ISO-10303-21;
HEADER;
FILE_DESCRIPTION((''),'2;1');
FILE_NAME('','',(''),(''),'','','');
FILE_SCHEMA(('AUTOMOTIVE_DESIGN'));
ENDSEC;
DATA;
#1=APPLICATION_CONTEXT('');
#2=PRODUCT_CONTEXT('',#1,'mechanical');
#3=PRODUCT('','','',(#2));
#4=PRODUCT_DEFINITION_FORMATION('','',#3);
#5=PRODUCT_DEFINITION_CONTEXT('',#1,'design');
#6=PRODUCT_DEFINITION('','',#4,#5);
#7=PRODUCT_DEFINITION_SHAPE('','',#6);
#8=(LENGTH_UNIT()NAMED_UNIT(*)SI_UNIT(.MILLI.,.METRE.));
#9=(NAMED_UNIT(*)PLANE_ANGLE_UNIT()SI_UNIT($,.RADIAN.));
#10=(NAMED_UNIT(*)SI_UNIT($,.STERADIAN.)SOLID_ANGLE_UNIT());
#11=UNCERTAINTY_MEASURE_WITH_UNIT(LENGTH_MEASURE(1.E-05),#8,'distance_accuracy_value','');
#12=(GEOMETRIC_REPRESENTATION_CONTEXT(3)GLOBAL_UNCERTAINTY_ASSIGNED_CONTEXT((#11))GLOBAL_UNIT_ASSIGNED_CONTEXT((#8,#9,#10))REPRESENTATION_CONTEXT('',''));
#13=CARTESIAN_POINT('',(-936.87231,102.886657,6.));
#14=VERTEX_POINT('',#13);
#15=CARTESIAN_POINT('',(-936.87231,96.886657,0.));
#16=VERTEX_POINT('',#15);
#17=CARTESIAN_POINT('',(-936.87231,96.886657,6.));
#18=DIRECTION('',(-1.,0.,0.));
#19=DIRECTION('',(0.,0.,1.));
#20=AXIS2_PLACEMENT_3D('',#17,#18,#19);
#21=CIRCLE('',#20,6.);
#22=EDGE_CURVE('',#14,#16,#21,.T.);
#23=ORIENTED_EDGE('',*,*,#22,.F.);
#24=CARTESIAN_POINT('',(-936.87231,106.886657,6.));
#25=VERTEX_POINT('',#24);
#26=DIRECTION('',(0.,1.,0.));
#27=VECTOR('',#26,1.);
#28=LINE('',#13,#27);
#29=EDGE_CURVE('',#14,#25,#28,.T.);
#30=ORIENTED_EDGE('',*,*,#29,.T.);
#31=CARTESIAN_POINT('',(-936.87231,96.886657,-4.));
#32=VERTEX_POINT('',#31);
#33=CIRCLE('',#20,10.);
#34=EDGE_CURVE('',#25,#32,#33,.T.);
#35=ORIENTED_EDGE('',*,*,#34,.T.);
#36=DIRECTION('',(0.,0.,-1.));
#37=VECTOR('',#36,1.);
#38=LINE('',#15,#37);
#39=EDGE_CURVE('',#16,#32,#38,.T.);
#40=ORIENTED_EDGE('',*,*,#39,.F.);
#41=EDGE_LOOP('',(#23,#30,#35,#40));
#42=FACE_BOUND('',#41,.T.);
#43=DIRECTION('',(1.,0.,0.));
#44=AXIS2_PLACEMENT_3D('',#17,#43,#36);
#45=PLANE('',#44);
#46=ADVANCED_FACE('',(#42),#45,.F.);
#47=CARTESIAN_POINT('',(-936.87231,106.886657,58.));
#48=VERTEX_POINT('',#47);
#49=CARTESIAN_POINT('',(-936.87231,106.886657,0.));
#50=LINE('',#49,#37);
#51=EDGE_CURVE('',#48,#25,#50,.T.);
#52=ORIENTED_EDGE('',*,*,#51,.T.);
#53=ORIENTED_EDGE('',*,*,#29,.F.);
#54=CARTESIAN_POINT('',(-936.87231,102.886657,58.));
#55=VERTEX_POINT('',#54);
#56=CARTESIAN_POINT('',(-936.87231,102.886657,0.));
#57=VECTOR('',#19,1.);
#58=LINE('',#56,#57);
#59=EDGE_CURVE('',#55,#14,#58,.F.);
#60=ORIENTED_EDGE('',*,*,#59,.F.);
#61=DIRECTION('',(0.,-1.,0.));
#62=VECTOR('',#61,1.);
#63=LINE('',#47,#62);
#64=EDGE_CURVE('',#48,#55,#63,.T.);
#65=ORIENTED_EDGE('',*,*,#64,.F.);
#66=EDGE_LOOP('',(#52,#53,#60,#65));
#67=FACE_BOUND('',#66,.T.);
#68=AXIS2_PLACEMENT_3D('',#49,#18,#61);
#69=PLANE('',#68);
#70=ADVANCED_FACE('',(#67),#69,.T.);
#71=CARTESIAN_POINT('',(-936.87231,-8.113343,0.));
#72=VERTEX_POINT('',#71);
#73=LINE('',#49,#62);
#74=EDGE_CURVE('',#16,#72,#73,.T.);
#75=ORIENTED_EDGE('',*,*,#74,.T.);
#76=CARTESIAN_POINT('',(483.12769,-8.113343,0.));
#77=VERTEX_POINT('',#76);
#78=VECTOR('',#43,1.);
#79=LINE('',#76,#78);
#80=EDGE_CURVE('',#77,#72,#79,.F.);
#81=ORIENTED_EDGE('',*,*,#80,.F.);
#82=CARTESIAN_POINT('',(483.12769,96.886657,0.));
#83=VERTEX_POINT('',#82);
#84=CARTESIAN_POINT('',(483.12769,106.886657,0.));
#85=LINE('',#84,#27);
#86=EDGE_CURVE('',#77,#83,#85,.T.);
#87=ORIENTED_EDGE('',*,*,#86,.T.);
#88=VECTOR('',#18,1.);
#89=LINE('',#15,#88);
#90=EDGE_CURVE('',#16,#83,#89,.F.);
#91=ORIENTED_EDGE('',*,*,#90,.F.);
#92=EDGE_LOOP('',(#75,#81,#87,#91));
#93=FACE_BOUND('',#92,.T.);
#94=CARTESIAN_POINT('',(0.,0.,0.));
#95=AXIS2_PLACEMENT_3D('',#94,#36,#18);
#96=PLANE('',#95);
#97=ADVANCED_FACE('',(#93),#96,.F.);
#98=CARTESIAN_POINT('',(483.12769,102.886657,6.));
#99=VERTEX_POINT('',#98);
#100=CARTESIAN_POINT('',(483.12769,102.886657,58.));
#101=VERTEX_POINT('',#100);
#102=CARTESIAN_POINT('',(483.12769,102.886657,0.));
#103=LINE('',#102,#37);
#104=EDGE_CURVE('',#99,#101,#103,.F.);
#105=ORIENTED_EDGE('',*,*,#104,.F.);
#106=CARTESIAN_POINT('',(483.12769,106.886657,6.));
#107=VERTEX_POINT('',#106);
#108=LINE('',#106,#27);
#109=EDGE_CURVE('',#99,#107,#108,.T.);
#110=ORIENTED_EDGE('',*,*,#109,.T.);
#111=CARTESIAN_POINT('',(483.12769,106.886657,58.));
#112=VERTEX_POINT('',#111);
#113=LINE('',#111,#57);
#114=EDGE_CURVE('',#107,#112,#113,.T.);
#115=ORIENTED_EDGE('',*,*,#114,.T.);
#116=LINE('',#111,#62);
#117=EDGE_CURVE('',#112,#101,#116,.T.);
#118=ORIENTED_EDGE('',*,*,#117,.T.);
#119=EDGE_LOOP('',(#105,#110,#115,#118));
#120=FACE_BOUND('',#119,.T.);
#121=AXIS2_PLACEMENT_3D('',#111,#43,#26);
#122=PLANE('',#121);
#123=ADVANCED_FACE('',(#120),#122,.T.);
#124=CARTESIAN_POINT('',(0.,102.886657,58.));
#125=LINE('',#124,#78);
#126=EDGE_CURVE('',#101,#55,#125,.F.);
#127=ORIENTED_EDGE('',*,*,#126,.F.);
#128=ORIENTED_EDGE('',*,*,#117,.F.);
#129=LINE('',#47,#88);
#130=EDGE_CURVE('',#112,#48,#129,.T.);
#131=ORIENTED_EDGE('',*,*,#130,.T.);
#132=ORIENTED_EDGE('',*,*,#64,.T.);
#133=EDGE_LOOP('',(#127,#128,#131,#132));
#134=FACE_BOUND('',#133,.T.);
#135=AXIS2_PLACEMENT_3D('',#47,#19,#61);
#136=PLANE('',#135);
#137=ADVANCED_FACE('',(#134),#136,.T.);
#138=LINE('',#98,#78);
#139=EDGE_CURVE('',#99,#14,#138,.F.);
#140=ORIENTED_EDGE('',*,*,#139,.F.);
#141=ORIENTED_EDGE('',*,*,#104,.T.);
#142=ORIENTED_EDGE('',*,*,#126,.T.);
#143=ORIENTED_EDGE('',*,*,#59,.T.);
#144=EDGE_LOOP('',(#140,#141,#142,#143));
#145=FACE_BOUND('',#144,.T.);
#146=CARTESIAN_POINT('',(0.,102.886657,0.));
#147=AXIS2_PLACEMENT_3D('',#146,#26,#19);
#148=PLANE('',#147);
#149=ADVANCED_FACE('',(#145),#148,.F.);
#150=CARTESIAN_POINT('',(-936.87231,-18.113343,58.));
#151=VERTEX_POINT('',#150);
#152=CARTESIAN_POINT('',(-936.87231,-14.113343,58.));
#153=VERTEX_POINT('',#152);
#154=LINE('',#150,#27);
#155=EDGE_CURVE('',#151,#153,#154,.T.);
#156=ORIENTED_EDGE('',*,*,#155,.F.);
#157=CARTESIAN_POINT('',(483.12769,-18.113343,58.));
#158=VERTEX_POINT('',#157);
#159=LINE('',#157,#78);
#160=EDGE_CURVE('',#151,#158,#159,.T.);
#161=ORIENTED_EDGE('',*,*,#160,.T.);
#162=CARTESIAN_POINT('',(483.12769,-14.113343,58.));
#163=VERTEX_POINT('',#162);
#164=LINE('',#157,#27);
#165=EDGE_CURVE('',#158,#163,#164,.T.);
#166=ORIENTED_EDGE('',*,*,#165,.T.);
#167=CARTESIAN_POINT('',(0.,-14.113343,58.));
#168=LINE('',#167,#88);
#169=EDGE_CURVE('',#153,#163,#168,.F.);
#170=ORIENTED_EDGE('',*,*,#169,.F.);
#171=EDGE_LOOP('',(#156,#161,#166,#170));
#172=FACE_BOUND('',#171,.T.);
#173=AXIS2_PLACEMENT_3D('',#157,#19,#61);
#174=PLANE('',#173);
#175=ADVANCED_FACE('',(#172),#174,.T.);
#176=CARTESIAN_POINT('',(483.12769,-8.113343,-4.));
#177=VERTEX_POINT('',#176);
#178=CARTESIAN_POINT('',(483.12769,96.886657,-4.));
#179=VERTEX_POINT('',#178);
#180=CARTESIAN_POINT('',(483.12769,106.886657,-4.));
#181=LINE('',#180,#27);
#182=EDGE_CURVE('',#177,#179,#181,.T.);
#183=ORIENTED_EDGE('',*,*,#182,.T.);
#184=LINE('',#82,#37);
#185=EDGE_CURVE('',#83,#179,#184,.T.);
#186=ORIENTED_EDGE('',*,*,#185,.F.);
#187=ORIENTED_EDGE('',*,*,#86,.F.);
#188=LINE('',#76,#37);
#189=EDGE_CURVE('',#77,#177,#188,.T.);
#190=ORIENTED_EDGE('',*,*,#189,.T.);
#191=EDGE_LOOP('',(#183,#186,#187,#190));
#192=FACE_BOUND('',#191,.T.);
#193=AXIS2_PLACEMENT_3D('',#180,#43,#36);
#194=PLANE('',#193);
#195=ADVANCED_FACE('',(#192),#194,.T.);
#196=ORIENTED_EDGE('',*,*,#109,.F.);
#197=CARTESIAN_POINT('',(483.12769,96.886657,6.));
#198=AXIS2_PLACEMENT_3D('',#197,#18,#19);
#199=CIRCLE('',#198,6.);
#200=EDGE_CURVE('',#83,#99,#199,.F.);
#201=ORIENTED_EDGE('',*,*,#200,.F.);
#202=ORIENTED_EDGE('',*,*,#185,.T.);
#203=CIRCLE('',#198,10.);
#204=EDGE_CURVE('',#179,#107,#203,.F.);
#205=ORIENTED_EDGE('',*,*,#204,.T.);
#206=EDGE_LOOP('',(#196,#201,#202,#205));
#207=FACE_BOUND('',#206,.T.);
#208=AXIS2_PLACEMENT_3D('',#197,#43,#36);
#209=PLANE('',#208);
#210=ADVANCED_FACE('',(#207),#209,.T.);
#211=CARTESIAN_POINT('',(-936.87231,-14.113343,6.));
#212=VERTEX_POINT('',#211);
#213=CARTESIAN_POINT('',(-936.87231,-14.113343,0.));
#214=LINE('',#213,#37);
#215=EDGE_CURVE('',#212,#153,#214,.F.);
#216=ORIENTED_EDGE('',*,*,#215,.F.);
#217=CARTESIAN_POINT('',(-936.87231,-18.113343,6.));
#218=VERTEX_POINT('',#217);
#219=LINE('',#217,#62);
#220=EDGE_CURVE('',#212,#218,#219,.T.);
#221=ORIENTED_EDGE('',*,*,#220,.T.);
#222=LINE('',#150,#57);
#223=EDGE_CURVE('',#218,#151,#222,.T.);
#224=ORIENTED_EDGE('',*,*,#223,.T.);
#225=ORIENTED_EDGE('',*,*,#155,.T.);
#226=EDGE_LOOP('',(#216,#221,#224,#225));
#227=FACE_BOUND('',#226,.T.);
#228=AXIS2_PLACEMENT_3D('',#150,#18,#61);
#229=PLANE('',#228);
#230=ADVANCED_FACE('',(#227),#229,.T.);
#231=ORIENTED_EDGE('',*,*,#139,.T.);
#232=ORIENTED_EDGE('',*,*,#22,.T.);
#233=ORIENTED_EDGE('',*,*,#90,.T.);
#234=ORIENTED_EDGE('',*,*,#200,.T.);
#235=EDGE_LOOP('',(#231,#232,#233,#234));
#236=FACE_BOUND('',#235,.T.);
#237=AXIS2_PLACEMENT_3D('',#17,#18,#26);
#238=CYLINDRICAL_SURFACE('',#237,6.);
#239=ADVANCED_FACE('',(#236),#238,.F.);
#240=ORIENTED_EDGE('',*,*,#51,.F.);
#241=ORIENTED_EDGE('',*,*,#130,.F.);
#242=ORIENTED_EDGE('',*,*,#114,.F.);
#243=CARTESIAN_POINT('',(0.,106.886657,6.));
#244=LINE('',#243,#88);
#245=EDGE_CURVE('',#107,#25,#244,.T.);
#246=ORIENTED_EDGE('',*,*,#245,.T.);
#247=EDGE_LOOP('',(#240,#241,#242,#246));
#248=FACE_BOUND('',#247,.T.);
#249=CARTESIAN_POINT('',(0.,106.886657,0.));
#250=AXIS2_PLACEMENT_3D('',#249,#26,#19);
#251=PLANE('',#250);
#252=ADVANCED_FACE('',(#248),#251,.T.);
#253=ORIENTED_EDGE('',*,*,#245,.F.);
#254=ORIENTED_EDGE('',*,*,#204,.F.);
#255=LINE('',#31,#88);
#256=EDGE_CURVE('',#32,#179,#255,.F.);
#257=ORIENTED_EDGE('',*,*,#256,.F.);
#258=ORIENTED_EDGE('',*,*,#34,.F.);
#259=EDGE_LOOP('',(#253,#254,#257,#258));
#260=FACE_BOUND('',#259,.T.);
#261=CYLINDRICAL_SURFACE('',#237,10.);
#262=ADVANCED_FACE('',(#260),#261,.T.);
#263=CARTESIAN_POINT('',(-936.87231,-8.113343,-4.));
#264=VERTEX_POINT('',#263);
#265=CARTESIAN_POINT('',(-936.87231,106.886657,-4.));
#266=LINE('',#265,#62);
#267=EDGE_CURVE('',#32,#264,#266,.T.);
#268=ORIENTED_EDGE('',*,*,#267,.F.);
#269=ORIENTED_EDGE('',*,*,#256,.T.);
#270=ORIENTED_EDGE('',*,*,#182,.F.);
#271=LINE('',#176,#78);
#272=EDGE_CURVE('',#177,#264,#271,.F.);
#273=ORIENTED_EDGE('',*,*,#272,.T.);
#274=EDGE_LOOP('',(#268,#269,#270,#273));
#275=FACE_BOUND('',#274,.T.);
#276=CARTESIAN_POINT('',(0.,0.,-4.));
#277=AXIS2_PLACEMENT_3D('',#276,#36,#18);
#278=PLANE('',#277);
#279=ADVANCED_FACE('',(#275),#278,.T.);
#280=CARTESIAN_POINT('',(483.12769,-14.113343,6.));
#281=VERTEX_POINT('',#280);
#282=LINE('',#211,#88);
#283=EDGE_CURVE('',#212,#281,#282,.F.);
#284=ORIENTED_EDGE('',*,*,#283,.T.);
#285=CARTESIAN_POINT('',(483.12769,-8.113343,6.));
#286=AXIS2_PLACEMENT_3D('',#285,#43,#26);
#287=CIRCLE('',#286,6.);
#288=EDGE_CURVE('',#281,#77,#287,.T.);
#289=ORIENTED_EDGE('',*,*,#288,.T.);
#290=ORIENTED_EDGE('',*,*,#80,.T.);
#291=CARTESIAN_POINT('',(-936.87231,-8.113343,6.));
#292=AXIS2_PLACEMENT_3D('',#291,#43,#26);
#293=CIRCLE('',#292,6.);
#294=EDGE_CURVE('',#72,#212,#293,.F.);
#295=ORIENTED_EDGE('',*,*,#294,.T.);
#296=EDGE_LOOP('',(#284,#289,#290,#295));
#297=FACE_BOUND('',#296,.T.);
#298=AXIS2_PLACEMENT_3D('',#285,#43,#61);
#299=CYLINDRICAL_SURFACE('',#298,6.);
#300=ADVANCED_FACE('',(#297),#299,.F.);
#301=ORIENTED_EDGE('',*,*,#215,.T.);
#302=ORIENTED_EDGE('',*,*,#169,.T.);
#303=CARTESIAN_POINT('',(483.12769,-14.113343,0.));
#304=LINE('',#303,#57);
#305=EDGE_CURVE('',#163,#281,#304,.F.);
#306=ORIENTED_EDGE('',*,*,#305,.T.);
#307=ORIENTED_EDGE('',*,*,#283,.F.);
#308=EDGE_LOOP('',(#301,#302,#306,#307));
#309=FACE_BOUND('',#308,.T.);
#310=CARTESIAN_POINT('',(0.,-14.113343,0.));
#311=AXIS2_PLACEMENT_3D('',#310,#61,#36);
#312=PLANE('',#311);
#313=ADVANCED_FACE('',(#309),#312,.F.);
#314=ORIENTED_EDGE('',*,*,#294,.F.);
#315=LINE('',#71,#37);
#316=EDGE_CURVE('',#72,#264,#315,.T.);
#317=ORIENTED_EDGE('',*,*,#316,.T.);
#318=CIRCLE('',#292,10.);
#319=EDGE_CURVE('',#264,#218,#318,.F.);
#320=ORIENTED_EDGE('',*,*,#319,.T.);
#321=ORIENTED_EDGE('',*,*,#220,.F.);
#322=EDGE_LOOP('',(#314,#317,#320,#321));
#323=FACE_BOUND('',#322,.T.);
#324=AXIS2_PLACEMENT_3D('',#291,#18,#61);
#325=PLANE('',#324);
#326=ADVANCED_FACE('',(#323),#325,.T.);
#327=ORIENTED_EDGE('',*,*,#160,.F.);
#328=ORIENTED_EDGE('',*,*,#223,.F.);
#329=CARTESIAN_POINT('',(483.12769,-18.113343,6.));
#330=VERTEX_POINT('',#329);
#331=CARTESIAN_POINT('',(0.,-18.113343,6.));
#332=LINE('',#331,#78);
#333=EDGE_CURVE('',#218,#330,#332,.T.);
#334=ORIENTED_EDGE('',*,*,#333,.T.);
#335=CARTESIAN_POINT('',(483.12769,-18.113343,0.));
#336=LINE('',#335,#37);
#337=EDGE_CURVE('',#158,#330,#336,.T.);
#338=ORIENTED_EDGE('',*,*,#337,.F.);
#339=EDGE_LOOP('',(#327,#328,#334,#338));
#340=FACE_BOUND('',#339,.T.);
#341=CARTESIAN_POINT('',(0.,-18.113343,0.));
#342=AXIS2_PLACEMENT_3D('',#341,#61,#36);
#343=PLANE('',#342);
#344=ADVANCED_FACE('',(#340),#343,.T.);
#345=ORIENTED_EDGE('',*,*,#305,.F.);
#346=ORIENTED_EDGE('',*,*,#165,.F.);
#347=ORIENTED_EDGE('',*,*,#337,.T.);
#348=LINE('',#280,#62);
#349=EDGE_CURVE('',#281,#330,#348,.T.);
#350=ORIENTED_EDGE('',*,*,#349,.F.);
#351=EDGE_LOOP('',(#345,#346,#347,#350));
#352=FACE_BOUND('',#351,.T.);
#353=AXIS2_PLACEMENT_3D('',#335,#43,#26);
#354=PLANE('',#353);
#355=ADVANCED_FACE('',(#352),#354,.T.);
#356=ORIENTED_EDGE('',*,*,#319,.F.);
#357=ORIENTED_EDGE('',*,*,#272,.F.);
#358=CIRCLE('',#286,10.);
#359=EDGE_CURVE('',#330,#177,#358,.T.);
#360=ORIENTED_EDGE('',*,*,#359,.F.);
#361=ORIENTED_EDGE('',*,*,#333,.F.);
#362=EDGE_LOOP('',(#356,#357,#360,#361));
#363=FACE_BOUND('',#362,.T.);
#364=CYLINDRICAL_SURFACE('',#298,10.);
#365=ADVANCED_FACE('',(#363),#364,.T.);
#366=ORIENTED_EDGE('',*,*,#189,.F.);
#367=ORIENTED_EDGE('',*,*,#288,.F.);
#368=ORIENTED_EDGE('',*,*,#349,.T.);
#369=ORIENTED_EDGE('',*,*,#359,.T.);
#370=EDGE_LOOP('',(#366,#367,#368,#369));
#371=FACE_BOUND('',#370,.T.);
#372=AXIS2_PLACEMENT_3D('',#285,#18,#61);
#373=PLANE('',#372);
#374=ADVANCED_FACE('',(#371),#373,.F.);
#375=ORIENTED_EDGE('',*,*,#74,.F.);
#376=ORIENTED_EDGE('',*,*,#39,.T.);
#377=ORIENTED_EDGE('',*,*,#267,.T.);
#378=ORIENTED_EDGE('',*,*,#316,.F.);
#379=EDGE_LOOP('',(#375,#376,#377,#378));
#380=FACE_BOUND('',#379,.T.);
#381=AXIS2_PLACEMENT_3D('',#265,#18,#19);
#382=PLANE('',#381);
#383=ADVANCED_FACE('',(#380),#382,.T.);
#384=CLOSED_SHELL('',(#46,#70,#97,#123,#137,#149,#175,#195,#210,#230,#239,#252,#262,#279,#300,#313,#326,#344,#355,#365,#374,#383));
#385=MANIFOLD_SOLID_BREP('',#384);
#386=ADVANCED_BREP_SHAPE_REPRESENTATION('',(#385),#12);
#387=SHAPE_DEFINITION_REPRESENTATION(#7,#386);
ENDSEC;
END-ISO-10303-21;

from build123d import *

# Parameters (mm, degrees)
SKETCH1_W                    = 1420
SKETCH1_H                    = 125
BASE_FLANGE1_DEPTH           = 4
EDGE_FLANGE1_STRIP_W         = 28
EDGE_FLANGE1_STRIP_H         = 4
EDGE_FLANGE1_STRIP_CUT_DEPTH = 1420
EDGE_FLANGE1_DEPTH           = 1420
EDGE_FLANGE2_STRIP_W         = 28
EDGE_FLANGE2_STRIP_H         = 4
EDGE_FLANGE2_STRIP_CUT_DEPTH = 1420
EDGE_FLANGE2_DEPTH           = 1420


# Sheet-metal steps are written as plain solids
with BuildPart() as part:
    # Sketch1 → Base-Flange1 (new body)
    with BuildSketch(Plane.XY):
        with Locations((-226.8723099, 44.386657102)):
            Rectangle(SKETCH1_W, SKETCH1_H)
    extrude(amount=-BASE_FLANGE1_DEPTH)

    # Edge-Flange1 strip (across the edge) → Edge-Flange1 strip cut (cut)
    with BuildSketch(Plane(origin=(483.1276901, 106.886657102, 0), x_dir=(0, -1, 0), z_dir=(-1, 0, 0))):
        with Locations((-4, -2)):
            Rectangle(EDGE_FLANGE1_STRIP_W, EDGE_FLANGE1_STRIP_H)
    extrude(amount=EDGE_FLANGE1_STRIP_CUT_DEPTH, mode=Mode.SUBTRACT)

    # Edge-Flange1 section (across the edge) → Edge-Flange1 (add)
    with BuildSketch(Plane(origin=(483.1276901, 106.886657102, 0), x_dir=(0, -1, 0), z_dir=(-1, 0, 0))):
        with BuildLine():
            Line((0, 6), (0, 58))
            Line((0, 58), (4, 58))
            Line((4, 58), (4, 6))
            ThreePointArc((4, 6), (5.757359313, 1.757359313), (10, 0))
            Line((10, 0), (10, -4))
            ThreePointArc((10, -4), (2.928932188, -1.071067812), (0, 6))
        make_face()
    extrude(amount=EDGE_FLANGE1_DEPTH)

    # Edge-Flange2 strip (across the edge) → Edge-Flange2 strip cut (cut)
    with BuildSketch(Plane(origin=(-936.8723099, -18.113342898, 0), x_dir=(0, 1, 0), z_dir=(1, 0, 0))):
        with Locations((-4, -2)):
            Rectangle(EDGE_FLANGE2_STRIP_W, EDGE_FLANGE2_STRIP_H)
    extrude(amount=EDGE_FLANGE2_STRIP_CUT_DEPTH, mode=Mode.SUBTRACT)

    # Edge-Flange2 section (across the edge) → Edge-Flange2 (add)
    with BuildSketch(Plane(origin=(-936.8723099, -18.113342898, 0), x_dir=(0, 1, 0), z_dir=(1, 0, 0))):
        with BuildLine():
            Line((0, 6), (0, 58))
            Line((0, 58), (4, 58))
            Line((4, 58), (4, 6))
            ThreePointArc((4, 6), (5.757359313, 1.757359313), (10, 0))
            Line((10, 0), (10, -4))
            ThreePointArc((10, -4), (2.928932188, -1.071067812), (0, 6))
        make_face()
    extrude(amount=EDGE_FLANGE2_DEPTH)


solid = part.part
